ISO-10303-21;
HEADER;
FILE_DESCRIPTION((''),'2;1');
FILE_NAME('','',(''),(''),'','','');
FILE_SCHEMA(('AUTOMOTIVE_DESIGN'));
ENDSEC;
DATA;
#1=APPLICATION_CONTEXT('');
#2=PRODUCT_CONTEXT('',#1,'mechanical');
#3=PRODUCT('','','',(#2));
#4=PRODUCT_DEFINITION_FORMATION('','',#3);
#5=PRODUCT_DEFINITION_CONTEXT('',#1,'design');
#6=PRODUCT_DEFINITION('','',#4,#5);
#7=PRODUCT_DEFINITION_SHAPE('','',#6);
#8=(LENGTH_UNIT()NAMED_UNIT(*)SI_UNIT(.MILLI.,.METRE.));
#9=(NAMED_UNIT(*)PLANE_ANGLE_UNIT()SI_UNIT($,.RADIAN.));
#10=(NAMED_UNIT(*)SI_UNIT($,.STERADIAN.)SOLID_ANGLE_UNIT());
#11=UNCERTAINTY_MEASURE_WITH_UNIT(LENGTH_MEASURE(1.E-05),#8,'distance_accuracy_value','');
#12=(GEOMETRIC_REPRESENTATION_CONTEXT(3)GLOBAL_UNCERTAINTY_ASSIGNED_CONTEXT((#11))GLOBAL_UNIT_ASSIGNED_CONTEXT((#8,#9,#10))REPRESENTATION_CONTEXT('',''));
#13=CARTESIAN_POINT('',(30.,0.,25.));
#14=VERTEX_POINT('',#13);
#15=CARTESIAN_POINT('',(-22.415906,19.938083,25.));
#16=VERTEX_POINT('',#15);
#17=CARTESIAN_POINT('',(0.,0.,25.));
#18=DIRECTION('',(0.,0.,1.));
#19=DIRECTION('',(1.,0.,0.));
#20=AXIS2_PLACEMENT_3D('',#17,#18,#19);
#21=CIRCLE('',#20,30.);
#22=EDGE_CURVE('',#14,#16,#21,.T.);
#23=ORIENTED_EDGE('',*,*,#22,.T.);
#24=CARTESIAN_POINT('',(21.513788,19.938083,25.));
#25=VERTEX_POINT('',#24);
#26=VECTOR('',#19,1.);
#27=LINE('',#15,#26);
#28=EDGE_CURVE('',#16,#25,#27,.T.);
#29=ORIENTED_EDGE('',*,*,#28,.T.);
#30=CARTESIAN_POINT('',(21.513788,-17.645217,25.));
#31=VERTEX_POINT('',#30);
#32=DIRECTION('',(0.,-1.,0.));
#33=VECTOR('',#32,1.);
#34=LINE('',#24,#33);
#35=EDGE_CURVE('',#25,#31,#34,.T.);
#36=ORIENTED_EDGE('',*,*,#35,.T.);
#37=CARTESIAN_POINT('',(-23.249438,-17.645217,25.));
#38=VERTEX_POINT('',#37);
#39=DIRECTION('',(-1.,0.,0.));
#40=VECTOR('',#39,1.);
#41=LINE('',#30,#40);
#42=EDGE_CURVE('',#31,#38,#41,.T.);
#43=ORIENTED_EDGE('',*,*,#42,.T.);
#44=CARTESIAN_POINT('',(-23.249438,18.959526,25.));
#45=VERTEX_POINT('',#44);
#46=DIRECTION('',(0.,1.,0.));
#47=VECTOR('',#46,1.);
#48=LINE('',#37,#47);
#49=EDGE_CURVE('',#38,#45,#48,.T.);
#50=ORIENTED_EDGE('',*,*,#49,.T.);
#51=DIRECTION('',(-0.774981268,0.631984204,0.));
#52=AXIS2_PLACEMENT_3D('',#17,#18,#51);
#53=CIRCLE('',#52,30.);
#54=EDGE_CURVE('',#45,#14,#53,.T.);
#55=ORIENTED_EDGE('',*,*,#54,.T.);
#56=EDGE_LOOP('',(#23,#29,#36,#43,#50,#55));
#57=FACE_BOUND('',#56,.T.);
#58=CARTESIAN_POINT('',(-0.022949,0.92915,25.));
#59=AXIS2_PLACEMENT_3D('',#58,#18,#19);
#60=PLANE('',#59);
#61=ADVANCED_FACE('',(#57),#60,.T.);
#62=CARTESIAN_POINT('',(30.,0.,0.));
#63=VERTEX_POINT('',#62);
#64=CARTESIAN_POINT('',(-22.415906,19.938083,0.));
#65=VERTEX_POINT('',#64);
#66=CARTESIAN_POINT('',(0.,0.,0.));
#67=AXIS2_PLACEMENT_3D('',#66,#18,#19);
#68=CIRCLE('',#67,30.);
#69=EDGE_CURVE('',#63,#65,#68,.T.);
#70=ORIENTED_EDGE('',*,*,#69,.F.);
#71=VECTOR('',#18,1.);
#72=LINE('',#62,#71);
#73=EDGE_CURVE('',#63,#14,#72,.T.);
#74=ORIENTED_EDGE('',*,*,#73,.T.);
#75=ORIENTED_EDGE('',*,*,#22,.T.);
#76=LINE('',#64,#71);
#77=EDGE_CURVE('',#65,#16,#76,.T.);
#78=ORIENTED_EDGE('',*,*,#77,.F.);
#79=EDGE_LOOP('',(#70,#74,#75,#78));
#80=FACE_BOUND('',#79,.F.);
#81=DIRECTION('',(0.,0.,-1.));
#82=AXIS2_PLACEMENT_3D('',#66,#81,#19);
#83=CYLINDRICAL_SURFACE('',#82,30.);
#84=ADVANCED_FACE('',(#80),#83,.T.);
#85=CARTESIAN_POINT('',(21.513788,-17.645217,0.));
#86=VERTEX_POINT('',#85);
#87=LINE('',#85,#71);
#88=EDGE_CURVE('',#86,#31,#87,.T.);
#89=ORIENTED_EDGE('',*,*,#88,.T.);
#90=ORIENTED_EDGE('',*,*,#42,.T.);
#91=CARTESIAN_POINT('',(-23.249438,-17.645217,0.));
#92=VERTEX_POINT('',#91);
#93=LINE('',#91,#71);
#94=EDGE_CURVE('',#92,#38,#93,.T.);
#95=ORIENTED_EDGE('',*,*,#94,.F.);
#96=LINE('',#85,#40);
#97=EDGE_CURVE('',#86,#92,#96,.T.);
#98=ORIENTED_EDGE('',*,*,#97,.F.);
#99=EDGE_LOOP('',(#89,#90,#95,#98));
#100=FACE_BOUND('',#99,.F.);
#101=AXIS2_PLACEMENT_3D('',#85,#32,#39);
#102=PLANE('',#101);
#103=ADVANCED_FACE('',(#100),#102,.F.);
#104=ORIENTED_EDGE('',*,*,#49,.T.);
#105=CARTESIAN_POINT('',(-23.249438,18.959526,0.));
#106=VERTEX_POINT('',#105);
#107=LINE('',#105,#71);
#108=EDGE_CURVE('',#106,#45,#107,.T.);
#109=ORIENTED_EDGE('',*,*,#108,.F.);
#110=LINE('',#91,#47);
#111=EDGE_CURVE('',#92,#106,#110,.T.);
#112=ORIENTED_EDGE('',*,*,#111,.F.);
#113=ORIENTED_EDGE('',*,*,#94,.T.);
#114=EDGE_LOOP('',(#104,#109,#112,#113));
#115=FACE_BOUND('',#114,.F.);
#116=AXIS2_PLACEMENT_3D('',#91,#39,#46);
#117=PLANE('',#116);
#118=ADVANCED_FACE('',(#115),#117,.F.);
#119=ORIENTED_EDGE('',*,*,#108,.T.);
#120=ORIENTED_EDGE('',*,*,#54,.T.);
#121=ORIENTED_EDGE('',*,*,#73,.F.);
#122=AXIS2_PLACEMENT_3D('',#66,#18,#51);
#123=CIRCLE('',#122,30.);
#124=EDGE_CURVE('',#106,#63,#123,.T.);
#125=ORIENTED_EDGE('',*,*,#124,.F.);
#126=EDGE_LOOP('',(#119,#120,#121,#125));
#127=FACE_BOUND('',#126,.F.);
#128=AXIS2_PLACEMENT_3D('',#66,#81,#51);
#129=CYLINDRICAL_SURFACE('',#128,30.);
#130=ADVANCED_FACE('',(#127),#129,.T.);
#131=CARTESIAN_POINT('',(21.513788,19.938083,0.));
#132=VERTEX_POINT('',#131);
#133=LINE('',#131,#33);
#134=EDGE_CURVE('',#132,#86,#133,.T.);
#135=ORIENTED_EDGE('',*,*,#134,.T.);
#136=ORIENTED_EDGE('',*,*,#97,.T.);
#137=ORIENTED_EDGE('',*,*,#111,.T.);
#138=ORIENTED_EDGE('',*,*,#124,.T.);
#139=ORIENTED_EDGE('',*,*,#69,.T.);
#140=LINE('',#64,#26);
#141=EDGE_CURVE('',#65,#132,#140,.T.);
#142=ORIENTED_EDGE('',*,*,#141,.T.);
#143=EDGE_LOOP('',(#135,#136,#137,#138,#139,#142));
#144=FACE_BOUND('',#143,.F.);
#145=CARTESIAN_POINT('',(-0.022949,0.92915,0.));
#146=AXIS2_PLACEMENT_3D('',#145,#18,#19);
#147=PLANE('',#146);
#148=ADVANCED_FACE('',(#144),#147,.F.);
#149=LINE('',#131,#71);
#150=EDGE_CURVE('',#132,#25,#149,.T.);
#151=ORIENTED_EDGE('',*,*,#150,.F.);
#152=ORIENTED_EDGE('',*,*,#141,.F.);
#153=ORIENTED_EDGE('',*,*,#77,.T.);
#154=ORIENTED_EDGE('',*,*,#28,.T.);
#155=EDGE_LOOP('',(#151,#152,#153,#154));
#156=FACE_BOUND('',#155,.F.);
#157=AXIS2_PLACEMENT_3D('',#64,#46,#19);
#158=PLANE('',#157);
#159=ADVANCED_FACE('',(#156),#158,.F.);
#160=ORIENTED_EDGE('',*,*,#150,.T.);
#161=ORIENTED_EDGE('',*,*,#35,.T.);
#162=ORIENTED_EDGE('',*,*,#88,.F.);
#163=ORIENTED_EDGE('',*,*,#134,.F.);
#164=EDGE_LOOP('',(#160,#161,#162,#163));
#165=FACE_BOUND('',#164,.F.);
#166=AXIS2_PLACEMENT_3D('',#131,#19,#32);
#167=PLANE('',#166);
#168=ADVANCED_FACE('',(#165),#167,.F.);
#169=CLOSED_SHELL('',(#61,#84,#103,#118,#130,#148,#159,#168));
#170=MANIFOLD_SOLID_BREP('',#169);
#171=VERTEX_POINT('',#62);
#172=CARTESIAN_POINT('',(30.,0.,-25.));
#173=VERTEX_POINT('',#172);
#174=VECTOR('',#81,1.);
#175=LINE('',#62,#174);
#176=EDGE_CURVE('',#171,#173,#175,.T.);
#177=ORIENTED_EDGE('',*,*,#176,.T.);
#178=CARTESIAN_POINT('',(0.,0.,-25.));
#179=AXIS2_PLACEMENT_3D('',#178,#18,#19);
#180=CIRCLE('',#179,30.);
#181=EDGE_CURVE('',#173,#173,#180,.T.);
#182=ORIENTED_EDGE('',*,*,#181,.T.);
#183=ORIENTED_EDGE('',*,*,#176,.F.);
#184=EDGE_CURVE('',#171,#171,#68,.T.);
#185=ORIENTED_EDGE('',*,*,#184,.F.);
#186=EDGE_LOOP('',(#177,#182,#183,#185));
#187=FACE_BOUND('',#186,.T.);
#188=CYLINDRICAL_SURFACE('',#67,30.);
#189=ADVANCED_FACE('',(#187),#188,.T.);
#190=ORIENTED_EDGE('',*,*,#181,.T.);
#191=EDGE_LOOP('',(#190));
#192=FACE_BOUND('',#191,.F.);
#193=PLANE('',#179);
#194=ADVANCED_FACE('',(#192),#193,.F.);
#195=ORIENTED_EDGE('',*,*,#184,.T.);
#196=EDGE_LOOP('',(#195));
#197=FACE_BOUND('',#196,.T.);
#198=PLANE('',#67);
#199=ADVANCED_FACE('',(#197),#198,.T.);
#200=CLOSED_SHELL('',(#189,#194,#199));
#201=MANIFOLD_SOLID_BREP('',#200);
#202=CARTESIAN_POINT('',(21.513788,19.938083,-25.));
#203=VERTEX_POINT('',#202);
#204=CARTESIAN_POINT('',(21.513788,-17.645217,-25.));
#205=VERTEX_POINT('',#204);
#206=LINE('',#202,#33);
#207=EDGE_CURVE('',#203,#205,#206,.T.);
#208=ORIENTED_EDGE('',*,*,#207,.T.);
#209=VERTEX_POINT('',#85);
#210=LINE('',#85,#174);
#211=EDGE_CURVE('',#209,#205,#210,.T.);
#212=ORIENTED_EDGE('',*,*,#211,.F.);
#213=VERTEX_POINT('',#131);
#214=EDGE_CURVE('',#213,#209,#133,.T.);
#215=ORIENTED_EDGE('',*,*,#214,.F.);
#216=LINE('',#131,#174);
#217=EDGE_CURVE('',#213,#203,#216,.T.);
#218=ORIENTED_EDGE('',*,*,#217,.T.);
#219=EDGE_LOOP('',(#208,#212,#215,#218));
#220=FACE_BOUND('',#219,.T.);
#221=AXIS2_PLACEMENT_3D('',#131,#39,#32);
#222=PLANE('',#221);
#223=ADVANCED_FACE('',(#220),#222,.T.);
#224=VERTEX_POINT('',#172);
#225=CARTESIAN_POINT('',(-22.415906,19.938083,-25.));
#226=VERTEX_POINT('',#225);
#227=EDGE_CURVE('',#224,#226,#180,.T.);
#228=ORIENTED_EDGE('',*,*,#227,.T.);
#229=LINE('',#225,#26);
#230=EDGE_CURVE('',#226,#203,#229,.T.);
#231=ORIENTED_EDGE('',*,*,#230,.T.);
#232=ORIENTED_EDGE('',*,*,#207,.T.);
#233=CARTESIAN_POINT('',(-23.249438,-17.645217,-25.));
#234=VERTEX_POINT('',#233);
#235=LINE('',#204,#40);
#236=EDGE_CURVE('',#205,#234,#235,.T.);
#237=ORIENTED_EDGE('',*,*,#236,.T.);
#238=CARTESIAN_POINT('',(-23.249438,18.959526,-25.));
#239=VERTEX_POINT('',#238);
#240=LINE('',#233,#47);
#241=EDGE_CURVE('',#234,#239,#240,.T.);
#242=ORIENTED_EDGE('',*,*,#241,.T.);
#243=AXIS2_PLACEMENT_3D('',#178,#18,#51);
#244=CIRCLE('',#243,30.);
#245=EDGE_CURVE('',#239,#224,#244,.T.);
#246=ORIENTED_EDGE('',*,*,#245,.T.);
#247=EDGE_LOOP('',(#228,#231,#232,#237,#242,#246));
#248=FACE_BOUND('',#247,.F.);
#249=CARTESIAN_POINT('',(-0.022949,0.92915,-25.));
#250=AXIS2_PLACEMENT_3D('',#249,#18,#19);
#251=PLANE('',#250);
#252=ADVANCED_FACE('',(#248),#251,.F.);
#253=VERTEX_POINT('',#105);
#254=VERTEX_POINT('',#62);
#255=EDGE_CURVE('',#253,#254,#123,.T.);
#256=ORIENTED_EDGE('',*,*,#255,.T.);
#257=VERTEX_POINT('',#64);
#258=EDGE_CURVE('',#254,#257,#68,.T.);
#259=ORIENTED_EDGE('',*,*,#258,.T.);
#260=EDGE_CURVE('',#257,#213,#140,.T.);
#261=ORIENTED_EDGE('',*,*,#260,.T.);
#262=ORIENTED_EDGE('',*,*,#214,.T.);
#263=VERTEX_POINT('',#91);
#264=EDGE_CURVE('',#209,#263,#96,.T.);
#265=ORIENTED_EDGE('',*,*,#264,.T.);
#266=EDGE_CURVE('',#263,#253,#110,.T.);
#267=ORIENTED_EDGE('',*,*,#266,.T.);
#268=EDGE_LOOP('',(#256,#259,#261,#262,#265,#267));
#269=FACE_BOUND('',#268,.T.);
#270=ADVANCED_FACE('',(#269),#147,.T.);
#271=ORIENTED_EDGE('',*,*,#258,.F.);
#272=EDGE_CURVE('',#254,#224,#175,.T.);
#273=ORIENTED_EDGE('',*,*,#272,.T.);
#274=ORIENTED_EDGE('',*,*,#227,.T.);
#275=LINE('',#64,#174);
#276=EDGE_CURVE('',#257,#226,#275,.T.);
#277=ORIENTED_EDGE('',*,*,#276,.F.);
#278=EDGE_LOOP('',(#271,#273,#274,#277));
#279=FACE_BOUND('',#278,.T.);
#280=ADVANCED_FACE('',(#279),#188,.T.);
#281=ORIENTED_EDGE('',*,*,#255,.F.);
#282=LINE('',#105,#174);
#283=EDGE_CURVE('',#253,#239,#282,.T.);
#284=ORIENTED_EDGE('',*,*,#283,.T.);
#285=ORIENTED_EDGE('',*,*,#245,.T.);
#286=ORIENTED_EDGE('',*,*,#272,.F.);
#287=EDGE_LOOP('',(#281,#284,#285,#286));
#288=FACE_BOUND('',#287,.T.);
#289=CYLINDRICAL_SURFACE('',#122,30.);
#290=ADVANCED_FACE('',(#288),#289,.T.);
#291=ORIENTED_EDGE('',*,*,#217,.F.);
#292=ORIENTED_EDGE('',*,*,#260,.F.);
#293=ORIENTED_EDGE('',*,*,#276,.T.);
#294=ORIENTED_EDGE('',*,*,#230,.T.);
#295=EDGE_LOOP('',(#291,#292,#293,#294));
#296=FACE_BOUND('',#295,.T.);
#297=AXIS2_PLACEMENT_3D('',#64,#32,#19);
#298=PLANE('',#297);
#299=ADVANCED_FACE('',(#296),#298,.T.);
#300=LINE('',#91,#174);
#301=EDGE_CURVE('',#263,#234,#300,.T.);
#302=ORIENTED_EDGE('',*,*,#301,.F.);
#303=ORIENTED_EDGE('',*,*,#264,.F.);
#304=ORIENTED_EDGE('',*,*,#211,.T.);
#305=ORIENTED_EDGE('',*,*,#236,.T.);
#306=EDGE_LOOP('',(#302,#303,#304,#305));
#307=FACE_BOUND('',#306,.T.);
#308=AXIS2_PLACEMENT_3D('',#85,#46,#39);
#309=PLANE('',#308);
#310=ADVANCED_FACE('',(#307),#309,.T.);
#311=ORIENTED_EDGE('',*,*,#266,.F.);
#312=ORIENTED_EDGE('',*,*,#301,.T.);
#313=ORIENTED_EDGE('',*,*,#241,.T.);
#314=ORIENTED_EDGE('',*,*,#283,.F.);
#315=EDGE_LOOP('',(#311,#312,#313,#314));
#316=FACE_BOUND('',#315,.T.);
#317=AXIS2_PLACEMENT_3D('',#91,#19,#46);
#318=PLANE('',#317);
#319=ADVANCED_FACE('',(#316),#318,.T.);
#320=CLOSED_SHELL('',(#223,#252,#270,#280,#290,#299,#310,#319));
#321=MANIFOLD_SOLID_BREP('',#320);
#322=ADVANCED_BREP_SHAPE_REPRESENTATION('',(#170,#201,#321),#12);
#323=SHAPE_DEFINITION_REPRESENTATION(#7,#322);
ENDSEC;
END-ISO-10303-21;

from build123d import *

# Parameters (mm, degrees)
F0_R     = 30
F2_DEPTH = 25
F3_DEPTH = 25


with BuildPart() as f2:
    # F0 (on Top) → F2 (new body)
    with BuildSketch(Plane.XY):
        Circle(F0_R)
    extrude(amount=-F2_DEPTH)


with BuildPart() as f2b:
    # F1 (on face) → F2, piece 2 (new body)
    with BuildSketch(Plane.XY):
        with BuildLine():
            ThreePointArc((30, 0), (10.6658995578, 28.0399462664), (-22.4159057749, 19.9380833656))
            Line((-22.4159057749, 19.9380833656), (21.5137880296, 19.9380833656))
            Line((21.5137880296, 19.9380833656), (21.5137880296, -17.6452174783))
            Line((21.5137880296, -17.6452174783), (-23.2494380325, -17.6452174783))
            Line((-23.2494380325, -17.6452174783), (-23.2494380325, 18.9595261326))
            ThreePointArc((-23.2494380325, 18.9595261326), (-10.0627247559, -28.262016391), (30, 0))
        make_face()
    extrude(amount=-F2_DEPTH)


with BuildPart() as f3:
    # F3 (new): a face of the model
    f3_faces = [f2b.part.faces().sort_by_distance(p)[0] for p in [
        (-9.7781079194, -27.4626458534, 0),
    ]]
    extrude(f3_faces, amount=F3_DEPTH)


solid = Compound([f2.part, f2b.part, f3.part])
